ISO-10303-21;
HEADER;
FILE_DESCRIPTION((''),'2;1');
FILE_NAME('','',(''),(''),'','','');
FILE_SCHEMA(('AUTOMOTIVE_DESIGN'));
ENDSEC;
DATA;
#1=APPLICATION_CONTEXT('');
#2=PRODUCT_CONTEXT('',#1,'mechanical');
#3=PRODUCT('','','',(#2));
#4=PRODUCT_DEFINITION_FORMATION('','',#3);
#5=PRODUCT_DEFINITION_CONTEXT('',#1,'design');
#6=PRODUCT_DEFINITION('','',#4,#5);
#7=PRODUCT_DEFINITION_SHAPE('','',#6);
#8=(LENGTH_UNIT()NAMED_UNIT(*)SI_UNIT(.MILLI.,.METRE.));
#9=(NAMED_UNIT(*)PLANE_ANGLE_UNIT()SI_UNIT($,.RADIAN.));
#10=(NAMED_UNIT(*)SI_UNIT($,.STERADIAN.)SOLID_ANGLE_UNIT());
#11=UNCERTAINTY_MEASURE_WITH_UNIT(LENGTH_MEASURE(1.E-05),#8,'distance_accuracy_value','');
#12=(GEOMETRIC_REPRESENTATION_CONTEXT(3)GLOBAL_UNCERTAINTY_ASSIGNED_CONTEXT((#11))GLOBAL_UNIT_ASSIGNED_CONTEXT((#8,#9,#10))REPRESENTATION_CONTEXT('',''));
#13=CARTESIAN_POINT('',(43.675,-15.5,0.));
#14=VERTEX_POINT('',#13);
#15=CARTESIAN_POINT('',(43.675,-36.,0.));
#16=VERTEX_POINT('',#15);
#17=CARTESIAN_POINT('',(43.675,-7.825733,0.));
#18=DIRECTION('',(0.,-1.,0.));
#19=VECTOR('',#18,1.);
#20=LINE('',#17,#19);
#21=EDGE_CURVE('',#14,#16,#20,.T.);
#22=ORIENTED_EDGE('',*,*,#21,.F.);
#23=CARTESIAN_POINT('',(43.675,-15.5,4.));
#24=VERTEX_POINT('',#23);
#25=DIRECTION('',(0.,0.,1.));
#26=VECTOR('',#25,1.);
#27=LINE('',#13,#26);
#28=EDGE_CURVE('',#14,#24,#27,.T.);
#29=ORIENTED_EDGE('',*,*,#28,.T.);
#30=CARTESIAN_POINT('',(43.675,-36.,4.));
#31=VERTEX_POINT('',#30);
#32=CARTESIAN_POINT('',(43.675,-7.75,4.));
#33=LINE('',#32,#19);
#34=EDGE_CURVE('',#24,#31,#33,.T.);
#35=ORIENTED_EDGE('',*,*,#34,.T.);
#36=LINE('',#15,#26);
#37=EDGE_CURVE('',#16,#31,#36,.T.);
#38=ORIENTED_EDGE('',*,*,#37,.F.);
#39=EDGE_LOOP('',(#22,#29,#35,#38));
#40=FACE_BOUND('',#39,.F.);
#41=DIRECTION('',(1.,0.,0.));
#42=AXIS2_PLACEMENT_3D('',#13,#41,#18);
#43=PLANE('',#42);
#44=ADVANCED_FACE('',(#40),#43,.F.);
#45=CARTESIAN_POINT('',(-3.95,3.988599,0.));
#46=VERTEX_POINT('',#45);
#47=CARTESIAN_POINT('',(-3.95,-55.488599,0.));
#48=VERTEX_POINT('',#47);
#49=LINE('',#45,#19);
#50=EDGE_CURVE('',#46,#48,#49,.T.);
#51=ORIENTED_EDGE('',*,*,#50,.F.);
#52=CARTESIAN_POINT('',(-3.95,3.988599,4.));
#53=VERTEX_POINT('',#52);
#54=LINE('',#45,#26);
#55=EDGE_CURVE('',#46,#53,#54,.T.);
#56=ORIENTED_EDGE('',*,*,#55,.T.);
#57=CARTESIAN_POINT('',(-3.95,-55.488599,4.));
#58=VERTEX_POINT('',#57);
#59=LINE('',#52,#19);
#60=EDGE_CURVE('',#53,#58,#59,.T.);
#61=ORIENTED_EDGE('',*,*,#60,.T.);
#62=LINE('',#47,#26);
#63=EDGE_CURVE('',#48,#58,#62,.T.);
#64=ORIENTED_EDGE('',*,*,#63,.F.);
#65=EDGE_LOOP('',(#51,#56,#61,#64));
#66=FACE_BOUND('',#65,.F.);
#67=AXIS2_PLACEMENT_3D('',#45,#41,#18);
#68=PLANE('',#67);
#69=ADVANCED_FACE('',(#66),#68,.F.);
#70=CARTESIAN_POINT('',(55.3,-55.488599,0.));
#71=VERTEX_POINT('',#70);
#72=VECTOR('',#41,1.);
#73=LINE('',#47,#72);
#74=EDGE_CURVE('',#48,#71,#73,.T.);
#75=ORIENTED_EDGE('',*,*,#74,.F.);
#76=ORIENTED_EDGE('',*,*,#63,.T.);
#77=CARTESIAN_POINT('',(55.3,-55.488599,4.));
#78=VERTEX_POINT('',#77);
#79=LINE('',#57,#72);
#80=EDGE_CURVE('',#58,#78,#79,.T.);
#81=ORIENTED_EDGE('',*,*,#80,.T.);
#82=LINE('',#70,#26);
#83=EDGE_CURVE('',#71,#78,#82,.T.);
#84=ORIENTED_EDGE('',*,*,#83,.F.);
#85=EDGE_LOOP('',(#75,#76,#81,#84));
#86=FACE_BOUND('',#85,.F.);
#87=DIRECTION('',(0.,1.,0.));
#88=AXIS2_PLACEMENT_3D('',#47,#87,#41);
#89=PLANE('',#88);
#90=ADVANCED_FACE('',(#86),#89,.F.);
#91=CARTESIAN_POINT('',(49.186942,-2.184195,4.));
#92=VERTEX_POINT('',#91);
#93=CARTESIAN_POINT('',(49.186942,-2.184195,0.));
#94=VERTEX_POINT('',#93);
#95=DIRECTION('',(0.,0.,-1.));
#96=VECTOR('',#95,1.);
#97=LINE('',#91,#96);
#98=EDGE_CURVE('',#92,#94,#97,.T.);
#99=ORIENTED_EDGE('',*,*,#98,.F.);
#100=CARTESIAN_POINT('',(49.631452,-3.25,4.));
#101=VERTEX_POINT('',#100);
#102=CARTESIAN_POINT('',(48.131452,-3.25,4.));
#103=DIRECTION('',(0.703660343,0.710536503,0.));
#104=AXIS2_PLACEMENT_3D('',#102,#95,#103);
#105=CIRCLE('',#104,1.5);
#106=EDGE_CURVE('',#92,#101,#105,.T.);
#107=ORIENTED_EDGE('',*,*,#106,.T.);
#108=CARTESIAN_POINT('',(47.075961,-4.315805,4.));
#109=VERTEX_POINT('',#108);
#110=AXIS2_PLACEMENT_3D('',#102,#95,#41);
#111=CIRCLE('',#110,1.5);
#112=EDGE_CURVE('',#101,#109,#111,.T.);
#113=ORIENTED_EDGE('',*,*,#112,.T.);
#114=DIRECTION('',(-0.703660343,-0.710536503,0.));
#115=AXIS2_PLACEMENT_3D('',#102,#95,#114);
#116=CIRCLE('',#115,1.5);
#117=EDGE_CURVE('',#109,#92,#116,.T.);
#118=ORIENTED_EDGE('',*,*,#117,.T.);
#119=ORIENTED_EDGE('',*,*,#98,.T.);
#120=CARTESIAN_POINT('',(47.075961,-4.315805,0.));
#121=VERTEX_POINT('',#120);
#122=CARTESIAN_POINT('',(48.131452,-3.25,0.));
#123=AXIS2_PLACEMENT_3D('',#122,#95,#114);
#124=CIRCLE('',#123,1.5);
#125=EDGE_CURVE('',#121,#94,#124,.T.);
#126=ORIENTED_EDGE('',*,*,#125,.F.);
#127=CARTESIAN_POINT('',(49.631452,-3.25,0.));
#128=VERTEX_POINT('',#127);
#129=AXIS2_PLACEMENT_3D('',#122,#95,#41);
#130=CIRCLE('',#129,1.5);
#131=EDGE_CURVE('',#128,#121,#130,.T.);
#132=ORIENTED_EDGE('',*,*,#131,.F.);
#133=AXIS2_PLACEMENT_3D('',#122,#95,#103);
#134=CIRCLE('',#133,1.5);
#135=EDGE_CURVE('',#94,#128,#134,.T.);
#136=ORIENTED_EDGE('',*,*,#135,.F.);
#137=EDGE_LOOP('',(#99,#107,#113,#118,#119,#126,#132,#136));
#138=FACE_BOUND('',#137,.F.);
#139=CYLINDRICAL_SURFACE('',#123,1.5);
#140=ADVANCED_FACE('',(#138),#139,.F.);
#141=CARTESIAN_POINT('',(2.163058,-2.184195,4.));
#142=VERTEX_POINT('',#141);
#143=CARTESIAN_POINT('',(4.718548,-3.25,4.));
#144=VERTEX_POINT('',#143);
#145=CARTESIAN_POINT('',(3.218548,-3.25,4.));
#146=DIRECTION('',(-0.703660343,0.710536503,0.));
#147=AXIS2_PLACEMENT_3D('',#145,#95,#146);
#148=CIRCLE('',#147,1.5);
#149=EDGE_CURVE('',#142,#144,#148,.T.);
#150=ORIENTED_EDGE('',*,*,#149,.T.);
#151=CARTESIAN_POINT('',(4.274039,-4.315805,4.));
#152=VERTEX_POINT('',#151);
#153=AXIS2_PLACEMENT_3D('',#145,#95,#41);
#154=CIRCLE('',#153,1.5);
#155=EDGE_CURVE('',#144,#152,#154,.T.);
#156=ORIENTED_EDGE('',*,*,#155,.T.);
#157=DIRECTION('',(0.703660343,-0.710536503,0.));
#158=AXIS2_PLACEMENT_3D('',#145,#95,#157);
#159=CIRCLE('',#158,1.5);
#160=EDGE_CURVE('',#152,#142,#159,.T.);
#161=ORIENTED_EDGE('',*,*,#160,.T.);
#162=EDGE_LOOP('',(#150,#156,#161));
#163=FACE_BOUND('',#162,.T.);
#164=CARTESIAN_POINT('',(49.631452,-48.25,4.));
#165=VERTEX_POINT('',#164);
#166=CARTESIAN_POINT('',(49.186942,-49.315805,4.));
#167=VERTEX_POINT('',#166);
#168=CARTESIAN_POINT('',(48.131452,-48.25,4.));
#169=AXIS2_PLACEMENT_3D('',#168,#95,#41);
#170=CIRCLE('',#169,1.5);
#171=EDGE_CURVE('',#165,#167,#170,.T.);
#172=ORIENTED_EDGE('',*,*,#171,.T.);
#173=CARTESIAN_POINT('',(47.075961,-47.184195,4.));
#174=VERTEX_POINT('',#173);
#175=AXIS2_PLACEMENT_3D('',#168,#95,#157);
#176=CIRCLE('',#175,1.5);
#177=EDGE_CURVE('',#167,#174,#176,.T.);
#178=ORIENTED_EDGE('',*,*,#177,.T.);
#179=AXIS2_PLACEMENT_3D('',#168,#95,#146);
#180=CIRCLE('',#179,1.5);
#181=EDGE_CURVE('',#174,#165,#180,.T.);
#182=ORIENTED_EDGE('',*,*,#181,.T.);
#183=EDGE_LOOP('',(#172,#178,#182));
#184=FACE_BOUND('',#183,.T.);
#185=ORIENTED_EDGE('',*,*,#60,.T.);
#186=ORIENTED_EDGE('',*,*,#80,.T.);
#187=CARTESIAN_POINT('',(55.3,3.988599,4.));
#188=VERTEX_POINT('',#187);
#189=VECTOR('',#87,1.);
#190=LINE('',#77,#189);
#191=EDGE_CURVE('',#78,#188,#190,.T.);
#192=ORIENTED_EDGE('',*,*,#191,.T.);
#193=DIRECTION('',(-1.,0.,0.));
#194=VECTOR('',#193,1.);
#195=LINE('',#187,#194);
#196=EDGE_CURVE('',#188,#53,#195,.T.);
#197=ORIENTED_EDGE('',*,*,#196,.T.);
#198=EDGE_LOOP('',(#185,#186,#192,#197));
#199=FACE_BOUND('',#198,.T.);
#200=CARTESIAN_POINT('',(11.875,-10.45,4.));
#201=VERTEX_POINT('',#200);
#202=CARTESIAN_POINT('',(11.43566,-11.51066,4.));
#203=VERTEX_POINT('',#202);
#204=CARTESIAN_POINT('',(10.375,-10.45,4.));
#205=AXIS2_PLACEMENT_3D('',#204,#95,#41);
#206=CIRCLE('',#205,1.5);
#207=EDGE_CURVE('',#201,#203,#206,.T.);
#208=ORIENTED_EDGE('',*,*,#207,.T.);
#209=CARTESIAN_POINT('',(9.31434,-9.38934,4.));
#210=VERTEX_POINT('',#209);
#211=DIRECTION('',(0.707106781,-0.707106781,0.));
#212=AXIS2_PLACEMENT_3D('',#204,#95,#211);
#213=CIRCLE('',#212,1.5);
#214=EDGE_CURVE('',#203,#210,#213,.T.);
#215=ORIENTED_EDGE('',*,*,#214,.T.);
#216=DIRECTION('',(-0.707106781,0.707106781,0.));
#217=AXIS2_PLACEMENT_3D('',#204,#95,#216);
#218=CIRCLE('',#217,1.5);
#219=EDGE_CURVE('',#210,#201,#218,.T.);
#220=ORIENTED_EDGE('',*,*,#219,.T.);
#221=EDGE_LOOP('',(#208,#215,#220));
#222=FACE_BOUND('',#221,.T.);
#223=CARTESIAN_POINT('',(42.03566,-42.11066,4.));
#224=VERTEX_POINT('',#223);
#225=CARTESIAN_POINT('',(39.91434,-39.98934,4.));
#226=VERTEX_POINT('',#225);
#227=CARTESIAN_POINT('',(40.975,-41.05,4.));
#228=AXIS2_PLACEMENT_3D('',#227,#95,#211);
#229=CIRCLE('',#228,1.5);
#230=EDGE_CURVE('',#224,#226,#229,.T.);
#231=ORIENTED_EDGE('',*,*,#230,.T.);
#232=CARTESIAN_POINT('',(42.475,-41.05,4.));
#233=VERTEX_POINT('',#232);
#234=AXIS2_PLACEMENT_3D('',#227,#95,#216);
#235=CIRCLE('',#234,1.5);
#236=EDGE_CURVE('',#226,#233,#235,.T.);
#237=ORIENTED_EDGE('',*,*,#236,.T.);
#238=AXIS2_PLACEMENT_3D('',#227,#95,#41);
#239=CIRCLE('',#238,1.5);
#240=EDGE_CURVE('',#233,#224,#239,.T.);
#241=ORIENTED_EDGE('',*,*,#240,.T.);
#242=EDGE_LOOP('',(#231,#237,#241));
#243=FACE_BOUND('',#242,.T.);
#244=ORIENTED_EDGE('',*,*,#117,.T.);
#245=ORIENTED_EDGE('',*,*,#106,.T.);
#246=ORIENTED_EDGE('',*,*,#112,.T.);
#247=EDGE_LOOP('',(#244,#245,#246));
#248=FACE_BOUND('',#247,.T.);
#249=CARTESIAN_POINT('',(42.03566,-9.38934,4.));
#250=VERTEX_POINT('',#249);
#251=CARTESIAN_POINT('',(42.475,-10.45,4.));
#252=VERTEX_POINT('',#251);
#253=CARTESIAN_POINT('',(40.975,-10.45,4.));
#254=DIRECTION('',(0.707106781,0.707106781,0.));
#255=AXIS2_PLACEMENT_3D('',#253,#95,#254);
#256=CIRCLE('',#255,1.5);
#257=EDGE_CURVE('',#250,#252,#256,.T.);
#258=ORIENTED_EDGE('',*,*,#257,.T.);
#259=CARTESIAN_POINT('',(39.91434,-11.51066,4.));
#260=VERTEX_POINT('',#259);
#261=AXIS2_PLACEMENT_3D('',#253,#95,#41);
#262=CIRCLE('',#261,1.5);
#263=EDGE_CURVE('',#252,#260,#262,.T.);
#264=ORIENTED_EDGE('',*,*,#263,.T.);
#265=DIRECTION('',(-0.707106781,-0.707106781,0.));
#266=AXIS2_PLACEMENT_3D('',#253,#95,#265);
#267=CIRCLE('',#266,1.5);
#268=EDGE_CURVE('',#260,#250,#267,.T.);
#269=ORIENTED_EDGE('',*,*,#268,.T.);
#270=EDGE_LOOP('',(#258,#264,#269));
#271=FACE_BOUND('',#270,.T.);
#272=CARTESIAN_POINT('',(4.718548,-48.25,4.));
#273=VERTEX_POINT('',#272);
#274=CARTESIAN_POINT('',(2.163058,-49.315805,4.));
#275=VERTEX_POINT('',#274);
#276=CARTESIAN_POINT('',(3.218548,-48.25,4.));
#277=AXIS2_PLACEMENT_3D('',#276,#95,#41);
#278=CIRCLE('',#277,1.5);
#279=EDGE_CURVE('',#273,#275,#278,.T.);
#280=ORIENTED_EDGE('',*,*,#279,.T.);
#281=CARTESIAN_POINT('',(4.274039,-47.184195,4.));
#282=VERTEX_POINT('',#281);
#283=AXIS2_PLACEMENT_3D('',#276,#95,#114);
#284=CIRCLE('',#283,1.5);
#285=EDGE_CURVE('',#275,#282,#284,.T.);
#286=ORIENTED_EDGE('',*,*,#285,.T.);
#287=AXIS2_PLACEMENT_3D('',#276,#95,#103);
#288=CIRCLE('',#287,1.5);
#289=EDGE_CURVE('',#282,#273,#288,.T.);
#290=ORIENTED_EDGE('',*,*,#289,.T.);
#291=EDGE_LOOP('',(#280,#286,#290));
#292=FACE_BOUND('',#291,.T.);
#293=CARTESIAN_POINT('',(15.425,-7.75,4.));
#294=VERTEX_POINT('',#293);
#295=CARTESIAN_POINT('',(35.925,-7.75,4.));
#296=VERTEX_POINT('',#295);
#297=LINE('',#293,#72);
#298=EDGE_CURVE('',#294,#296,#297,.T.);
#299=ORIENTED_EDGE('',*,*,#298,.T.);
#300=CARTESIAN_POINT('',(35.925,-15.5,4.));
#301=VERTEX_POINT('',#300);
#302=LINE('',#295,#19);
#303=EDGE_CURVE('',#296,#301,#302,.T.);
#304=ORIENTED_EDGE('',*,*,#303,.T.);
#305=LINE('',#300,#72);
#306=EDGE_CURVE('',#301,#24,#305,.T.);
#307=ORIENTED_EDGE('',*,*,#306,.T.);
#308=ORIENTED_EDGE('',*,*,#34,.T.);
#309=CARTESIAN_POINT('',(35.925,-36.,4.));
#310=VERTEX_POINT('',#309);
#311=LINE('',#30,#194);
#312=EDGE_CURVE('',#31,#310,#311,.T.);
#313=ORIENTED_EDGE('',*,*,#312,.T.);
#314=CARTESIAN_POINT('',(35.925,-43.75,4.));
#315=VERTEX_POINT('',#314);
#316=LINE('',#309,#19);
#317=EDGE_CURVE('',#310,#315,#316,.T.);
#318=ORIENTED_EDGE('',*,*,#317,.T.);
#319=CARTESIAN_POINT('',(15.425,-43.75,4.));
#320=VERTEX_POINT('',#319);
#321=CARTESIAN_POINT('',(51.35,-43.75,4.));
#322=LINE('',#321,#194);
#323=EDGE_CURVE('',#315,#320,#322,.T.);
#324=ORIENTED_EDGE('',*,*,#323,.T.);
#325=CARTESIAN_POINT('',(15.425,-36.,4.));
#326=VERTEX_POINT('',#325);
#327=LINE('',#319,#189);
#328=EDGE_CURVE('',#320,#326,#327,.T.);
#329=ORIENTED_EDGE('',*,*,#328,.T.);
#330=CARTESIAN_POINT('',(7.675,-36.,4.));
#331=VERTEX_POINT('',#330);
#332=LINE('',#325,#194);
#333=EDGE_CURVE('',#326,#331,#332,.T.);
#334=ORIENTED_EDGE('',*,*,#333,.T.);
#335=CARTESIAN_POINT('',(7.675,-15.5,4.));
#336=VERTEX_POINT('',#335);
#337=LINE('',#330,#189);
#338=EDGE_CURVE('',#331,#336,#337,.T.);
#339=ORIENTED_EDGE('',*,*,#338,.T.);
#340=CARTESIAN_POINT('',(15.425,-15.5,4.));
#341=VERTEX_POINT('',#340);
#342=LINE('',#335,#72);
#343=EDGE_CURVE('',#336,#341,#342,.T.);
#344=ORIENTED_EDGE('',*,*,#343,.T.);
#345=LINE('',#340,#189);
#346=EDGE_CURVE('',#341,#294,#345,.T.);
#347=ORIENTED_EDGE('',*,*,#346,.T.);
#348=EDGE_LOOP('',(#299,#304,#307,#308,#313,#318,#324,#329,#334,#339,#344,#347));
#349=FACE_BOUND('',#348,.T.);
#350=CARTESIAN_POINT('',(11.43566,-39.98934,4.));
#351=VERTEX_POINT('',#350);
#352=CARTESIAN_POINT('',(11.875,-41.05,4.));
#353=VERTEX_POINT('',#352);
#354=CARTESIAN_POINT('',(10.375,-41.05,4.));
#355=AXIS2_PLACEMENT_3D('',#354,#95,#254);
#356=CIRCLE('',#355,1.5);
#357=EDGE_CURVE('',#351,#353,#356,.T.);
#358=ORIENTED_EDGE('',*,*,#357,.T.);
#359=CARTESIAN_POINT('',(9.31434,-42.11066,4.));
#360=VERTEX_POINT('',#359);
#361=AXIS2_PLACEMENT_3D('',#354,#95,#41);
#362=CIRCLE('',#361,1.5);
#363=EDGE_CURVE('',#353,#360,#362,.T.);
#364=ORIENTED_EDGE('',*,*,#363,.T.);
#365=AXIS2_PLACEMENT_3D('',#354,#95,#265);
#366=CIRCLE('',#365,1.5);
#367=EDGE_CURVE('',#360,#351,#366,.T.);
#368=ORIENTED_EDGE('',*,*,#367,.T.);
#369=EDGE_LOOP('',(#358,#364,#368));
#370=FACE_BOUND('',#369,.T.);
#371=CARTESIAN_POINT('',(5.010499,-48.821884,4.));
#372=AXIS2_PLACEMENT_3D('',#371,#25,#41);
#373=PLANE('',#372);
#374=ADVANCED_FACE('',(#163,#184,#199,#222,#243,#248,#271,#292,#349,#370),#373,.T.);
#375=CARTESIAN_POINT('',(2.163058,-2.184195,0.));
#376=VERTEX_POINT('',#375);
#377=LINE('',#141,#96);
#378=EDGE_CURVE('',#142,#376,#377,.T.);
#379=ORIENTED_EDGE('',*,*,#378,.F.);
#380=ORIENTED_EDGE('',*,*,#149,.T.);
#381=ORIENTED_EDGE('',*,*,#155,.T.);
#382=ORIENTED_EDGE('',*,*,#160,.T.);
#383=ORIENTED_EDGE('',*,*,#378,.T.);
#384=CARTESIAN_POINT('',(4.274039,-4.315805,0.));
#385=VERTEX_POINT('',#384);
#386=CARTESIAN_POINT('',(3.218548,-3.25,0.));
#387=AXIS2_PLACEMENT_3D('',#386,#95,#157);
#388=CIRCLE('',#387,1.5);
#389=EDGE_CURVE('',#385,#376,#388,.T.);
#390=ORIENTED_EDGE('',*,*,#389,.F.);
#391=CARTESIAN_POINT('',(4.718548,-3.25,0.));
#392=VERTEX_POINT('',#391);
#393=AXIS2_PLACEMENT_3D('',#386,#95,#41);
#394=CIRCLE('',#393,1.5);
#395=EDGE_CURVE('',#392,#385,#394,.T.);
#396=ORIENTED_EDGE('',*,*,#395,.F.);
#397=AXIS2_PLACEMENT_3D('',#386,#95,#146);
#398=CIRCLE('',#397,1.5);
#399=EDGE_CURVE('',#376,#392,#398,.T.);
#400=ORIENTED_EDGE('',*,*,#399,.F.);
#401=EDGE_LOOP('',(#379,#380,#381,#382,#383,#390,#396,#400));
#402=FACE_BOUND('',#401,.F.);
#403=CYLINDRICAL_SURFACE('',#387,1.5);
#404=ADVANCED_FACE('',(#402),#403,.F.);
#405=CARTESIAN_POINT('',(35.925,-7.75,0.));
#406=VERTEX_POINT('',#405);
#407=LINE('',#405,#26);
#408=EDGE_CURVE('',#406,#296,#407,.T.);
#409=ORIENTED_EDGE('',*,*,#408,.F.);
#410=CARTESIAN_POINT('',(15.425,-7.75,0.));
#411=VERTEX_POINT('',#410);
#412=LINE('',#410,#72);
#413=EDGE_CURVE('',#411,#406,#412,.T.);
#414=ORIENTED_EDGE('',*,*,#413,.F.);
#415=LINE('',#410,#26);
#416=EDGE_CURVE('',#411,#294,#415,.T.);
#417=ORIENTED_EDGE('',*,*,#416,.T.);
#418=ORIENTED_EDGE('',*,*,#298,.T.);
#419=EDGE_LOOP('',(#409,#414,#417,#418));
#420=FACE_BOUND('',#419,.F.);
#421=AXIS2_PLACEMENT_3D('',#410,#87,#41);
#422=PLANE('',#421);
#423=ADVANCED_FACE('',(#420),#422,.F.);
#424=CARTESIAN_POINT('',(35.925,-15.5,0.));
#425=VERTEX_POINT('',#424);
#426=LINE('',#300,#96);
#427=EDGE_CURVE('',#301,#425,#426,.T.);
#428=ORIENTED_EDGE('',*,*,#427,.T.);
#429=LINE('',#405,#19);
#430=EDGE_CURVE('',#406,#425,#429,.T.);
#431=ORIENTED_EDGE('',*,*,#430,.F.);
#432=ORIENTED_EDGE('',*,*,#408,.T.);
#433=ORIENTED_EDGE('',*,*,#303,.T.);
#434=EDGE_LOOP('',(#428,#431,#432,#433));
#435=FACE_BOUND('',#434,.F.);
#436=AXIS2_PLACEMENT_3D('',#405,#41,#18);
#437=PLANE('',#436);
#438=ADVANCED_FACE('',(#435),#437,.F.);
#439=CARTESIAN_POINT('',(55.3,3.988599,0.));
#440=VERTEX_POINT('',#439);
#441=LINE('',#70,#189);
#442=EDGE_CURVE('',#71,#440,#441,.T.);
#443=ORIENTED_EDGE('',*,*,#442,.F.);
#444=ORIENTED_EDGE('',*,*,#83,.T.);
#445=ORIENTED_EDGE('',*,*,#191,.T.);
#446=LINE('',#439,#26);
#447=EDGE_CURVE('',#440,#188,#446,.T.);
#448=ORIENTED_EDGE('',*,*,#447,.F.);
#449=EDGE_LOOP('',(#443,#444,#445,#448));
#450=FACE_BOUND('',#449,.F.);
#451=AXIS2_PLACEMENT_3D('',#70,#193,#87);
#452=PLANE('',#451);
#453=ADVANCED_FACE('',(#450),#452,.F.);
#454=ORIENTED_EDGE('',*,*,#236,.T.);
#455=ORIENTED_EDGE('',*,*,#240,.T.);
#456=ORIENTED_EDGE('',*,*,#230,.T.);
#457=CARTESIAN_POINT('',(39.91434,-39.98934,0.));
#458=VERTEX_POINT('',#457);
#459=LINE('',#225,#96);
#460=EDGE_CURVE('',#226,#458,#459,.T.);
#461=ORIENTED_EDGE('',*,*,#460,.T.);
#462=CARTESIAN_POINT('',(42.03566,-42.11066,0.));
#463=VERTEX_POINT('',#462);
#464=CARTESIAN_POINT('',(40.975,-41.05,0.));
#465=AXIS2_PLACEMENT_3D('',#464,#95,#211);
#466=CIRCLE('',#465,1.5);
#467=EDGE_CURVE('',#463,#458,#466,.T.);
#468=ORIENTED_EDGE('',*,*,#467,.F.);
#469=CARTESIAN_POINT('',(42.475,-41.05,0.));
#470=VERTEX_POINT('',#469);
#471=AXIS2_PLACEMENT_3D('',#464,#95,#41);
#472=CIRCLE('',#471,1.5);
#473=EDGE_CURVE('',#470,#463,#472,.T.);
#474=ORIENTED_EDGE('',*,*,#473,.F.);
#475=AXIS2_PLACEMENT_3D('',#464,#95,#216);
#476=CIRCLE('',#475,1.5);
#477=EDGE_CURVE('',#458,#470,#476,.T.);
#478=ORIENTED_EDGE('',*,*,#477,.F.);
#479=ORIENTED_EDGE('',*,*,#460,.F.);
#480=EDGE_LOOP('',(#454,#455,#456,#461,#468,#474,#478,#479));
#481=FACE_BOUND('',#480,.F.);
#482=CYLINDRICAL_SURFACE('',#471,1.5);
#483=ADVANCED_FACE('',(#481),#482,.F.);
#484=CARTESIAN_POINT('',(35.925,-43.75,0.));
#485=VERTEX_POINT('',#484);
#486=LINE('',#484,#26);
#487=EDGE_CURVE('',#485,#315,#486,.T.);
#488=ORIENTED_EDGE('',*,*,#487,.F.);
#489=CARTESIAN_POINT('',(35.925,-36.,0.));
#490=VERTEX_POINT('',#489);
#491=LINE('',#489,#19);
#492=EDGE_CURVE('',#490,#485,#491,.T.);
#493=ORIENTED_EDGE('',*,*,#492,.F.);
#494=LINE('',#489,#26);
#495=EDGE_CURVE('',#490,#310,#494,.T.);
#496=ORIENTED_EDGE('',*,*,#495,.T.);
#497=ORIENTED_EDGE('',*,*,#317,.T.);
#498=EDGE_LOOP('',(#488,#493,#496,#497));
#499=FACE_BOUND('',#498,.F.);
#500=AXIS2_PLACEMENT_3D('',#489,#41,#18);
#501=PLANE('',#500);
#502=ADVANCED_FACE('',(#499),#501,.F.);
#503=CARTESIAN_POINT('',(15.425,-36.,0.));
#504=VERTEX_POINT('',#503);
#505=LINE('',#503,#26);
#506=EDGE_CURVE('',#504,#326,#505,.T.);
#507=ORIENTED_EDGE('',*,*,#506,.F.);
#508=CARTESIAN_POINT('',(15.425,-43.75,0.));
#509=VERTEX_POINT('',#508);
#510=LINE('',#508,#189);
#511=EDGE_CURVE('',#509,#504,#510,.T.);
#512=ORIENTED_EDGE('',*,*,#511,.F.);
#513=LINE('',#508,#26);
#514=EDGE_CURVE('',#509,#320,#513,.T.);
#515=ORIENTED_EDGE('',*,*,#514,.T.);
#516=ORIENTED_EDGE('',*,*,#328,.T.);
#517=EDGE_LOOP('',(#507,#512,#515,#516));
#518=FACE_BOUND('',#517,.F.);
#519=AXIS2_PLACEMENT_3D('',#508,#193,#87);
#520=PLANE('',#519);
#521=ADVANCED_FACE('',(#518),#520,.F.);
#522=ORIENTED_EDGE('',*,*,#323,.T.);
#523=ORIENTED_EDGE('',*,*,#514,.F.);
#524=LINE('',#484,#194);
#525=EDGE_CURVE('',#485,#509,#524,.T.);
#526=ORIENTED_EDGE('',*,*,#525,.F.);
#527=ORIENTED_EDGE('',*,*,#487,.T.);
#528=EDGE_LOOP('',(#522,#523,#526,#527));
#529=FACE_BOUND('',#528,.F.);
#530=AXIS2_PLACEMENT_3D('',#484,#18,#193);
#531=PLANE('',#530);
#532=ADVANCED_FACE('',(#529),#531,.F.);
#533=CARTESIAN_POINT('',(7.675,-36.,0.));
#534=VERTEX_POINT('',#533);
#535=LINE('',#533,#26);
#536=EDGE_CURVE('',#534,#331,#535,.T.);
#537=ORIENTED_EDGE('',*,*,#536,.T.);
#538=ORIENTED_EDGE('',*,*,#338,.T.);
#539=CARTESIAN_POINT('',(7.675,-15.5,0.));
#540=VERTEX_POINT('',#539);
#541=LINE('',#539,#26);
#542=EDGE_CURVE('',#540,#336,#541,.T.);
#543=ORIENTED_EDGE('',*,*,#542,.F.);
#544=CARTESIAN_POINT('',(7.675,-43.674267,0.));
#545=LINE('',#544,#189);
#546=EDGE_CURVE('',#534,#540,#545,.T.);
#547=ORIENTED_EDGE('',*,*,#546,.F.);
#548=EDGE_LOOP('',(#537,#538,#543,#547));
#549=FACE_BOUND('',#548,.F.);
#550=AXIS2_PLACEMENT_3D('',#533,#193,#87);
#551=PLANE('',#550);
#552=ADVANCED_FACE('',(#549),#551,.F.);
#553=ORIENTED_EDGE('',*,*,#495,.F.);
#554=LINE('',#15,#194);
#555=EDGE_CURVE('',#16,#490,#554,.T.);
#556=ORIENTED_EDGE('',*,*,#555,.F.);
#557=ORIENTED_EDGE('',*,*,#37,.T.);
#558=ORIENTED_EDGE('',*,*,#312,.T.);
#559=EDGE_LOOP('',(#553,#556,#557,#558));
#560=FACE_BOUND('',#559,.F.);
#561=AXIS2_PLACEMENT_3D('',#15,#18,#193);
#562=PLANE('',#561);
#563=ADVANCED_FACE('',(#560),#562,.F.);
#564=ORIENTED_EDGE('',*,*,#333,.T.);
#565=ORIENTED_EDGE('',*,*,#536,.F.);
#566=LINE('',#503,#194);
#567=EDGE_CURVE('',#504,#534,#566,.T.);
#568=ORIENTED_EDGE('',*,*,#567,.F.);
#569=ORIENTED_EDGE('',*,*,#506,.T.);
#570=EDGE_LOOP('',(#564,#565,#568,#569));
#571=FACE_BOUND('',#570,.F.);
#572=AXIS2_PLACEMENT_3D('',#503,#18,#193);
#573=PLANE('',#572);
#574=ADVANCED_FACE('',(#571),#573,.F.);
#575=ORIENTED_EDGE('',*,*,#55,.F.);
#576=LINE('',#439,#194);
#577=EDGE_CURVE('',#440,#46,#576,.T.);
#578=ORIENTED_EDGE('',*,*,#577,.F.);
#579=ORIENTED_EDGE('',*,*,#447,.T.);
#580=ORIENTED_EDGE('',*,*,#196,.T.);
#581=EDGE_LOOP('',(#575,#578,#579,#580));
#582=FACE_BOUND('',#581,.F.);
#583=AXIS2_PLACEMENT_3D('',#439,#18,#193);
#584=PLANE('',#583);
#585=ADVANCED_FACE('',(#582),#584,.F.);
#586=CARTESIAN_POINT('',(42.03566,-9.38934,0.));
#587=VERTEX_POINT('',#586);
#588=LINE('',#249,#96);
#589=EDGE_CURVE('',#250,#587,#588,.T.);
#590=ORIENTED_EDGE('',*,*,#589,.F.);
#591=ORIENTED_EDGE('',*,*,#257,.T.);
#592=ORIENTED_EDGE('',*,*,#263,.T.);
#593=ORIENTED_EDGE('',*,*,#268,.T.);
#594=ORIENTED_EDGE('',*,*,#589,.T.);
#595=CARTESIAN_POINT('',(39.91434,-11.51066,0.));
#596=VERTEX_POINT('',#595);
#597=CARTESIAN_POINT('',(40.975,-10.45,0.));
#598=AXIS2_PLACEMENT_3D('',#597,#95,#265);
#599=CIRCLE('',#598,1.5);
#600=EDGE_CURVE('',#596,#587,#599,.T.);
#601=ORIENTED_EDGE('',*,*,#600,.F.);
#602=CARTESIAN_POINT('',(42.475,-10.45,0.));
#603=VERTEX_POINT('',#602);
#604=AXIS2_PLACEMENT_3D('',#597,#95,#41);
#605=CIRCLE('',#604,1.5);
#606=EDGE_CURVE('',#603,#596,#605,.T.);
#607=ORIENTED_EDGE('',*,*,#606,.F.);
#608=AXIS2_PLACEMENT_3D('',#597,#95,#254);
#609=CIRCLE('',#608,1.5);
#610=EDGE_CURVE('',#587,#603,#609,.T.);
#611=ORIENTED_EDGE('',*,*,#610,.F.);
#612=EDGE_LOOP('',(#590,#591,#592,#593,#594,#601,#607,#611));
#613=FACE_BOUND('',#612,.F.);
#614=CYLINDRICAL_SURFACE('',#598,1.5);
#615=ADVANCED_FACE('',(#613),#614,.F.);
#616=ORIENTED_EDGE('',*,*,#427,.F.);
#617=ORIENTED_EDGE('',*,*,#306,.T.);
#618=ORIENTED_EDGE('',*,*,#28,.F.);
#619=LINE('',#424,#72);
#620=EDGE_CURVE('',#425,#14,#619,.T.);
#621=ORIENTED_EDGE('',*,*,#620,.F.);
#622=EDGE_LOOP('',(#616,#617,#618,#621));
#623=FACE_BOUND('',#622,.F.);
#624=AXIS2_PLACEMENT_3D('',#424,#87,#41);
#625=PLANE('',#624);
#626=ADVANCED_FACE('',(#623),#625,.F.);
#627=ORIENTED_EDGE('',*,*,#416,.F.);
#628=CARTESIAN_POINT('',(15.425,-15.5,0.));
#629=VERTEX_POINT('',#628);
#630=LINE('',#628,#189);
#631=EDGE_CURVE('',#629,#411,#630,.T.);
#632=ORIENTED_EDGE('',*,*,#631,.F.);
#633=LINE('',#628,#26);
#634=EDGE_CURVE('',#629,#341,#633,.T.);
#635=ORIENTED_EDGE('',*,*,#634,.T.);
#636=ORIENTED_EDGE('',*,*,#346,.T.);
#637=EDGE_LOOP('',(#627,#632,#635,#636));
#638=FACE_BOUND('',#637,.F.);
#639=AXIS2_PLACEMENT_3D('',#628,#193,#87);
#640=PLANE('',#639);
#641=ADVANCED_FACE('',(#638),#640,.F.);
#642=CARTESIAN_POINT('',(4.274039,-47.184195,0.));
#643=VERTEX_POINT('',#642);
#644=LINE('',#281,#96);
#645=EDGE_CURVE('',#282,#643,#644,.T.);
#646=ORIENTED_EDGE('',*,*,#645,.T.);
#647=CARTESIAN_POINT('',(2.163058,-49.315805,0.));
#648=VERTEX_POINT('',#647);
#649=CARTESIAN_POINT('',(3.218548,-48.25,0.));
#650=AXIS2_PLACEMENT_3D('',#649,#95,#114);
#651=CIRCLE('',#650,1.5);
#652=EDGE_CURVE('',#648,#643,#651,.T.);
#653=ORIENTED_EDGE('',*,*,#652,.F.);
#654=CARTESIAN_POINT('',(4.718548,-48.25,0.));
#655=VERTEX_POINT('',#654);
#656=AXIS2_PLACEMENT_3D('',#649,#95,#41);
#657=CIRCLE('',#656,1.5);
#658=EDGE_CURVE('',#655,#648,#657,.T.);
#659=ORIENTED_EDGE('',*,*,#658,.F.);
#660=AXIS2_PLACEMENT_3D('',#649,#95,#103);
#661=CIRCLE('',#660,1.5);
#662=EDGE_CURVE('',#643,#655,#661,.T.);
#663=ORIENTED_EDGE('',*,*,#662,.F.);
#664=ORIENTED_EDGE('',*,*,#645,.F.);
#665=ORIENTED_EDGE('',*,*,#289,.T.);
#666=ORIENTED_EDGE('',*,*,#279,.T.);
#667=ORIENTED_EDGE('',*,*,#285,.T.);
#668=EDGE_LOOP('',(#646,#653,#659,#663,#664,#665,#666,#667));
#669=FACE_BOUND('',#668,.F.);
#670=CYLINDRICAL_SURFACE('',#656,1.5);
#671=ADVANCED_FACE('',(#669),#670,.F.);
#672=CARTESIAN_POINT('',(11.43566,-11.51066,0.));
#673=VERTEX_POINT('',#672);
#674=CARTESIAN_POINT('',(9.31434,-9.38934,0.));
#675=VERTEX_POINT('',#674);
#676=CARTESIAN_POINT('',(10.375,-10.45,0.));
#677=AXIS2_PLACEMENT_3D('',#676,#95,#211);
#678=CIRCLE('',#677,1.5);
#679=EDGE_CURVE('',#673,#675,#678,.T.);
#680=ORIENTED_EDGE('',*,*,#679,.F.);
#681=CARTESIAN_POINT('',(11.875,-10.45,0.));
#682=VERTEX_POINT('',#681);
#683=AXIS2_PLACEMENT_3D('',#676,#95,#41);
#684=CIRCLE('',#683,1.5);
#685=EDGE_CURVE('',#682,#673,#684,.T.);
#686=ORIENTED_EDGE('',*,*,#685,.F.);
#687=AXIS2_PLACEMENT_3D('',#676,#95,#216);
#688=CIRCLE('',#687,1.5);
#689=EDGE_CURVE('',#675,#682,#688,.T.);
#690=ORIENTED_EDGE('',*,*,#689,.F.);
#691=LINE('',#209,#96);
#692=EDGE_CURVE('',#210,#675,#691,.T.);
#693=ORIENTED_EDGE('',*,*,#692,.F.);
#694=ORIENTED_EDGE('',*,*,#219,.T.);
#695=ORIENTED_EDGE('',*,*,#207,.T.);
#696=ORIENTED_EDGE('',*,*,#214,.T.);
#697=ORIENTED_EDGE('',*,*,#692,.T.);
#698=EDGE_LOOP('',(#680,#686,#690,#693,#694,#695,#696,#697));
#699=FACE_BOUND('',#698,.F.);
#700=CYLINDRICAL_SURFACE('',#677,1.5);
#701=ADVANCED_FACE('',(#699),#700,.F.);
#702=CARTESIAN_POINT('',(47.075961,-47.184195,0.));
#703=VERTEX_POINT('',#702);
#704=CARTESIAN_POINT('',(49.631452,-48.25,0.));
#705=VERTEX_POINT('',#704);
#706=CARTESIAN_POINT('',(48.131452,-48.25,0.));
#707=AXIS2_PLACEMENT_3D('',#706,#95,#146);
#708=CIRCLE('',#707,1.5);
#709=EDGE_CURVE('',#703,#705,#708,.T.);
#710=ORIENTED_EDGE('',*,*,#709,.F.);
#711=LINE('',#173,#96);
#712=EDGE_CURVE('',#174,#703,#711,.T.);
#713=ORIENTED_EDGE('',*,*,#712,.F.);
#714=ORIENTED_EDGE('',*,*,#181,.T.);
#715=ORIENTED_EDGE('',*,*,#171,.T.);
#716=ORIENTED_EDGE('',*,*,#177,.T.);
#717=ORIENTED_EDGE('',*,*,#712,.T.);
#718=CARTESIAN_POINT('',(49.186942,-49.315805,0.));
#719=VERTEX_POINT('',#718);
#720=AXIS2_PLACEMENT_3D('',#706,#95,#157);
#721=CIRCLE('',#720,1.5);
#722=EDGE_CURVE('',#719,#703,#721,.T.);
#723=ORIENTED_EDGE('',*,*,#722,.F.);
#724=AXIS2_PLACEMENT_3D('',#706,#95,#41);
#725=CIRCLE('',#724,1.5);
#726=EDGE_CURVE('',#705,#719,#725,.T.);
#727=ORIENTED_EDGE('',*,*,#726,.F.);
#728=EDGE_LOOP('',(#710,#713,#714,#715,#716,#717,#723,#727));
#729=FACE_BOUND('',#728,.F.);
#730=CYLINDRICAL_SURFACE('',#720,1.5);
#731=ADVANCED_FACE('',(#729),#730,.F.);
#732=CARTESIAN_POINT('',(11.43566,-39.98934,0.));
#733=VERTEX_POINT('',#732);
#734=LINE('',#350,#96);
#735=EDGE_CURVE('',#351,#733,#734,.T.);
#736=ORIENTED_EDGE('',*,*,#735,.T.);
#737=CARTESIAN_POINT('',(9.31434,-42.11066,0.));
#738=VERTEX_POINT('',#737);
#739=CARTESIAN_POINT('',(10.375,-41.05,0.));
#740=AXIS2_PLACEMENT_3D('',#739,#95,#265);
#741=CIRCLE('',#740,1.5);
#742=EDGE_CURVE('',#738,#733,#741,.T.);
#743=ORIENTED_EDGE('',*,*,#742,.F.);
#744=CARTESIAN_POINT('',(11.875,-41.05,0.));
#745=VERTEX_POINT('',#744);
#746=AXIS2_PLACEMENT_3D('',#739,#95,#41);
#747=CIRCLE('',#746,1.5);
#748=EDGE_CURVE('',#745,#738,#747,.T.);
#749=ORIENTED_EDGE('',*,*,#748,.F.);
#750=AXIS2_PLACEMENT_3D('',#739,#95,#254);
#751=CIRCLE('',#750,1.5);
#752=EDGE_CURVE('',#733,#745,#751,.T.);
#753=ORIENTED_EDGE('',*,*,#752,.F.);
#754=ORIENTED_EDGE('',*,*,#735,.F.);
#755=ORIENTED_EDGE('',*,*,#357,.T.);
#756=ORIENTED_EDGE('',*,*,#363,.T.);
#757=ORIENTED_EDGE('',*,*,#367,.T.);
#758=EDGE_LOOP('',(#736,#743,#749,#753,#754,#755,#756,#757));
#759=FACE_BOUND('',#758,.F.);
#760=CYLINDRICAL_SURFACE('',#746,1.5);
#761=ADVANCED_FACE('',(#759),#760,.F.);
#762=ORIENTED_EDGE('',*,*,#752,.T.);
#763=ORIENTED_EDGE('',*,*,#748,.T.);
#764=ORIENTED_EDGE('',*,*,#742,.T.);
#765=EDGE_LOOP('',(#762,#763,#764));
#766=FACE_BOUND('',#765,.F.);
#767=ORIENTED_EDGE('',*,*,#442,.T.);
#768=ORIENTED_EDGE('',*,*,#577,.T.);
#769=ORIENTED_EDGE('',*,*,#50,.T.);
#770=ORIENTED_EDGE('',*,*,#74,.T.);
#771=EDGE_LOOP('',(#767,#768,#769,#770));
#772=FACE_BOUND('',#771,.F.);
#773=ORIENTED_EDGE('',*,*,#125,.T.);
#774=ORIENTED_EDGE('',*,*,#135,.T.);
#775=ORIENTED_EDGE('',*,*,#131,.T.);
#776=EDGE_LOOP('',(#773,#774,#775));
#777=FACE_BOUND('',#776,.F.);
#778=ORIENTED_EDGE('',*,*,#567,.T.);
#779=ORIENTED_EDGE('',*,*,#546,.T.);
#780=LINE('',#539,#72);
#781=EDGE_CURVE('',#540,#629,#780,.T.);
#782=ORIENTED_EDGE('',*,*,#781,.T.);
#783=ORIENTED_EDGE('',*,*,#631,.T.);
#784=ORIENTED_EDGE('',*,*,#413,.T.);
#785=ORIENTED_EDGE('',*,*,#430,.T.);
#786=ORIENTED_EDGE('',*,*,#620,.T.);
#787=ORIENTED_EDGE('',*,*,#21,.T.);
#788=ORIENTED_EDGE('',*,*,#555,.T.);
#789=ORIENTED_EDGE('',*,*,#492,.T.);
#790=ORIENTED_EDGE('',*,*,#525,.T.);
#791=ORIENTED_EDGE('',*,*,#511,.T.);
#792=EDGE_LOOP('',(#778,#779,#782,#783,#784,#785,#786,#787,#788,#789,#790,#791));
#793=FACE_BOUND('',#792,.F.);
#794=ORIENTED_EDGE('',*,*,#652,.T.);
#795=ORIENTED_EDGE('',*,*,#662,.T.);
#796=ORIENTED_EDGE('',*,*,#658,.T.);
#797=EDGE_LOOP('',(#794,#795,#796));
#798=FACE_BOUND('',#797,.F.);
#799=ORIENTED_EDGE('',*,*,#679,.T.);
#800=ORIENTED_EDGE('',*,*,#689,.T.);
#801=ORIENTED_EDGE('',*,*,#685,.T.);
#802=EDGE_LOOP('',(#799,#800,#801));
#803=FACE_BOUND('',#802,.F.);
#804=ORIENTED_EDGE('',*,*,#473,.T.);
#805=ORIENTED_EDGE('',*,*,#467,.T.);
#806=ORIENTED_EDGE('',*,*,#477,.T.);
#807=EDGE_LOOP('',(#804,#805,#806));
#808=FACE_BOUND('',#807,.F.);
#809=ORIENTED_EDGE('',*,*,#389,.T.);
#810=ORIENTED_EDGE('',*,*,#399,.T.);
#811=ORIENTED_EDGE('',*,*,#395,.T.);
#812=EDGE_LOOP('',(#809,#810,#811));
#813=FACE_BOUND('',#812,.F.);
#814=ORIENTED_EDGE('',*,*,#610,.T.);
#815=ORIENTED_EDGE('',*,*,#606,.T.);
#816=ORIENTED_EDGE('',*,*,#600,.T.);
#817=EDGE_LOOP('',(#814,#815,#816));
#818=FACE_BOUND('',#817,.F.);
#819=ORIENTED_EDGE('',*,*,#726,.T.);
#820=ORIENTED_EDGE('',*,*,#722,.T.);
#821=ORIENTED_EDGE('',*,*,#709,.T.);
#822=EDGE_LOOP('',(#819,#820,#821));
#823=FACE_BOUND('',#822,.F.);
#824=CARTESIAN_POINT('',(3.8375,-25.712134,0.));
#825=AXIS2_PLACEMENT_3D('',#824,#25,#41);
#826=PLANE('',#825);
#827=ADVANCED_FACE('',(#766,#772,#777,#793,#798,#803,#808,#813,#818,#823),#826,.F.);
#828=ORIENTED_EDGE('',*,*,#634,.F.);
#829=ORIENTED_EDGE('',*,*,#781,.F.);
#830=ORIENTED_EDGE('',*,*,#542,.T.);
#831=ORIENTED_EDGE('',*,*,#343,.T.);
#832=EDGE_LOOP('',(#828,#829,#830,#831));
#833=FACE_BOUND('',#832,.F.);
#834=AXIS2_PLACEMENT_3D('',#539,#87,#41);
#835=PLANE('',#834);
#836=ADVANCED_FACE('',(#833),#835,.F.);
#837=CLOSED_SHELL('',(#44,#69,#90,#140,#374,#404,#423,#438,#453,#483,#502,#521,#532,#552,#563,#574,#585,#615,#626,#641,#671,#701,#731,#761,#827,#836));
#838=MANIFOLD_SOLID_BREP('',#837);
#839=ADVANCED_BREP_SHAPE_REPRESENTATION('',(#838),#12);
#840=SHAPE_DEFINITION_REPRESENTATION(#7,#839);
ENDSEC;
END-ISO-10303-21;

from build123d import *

# Parameters (mm, degrees)
F1_DEPTH = 2
F2_DEPTH = 4


with BuildPart() as f1:
    # F0 (on Top) → F1 (new body)
    with BuildSketch(Plane.XY):
        Polygon((0, -7.75), (0, -43.674267101), (7.675, -43.674267101), (7.675, -36), (7.675, -25.75), (7.675, -15.5), (7.675, -7.75), align=None)
        with BuildLine():
            Line((0, 0), (0, -7.75))
            Line((0, -7.75), (7.675, -7.75))
            Line((7.675, -7.75), (4.2740389016, -4.3158047541))
            ThreePointArc((4.2740389016, -4.3158047541), (2.152743633, -4.3054905145), (2.1630578726, -2.1841952459))
            Line((2.1630578726, -2.1841952459), (0, 0))
        make_face()
        with BuildLine():
            Line((7.675, 0), (0, 0))
            Line((0, 0), (2.1630578726, -2.1841952459))
            ThreePointArc((2.1630578726, -2.1841952459), (3.7959409001, -1.8655803072), (4.7185483871, -3.25))
            ThreePointArc((4.7185483871, -3.25), (4.6029680799, -3.827392513), (4.2740389016, -4.3158047541))
            Line((4.2740389016, -4.3158047541), (7.675, -7.75))
            Line((7.675, -7.75), (7.675, 0))
        make_face()
        Polygon((7.675, 0), (7.675, -7.75), (15.425, -7.75), (25.675, -7.75), (35.925, -7.75), (43.6, -7.75), (43.6, 0), align=None)
        Polygon((43.675, -36), (43.675, -43.75), (51.35, -43.75), (51.35, -7.825732899), (43.675, -7.825732899), (43.675, -15.5), (43.675, -25.75), align=None)
        Polygon((43.6, -7.825732899), (43.675, -7.825732899), (43.675, -7.75), (43.6, -7.825), align=None)
        with BuildLine():
            Line((51.35, -7.825732899), (51.35, 0))
            Line((51.35, 0), (49.1869421274, -2.1841952459))
            ThreePointArc((49.1869421274, -2.1841952459), (49.5158713057, -2.672607487), (49.6314516129, -3.25))
            ThreePointArc((49.6314516129, -3.25), (48.7088441259, -4.6344196928), (47.0759610984, -4.3158047541))
            Line((47.0759610984, -4.3158047541), (43.675, -7.75))
            Line((43.675, -7.75), (43.675, -7.825732899))
            Line((43.675, -7.825732899), (51.35, -7.825732899))
        make_face()
        with BuildLine():
            Line((49.1869421274, -2.1841952459), (51.35, 0))
            Line((51.35, 0), (43.6, 0))
            Line((43.6, 0), (43.6, -7.75))
            Line((43.6, -7.75), (43.675, -7.75))
            Line((43.675, -7.75), (47.0759610984, -4.3158047541))
            ThreePointArc((47.0759610984, -4.3158047541), (47.0656468588, -2.1945094855), (49.1869421274, -2.1841952459))
        make_face()
        with BuildLine():
            Line((9.3143398282, -9.3893398282), (7.675, -7.75))
            Line((7.675, -7.75), (7.675, -15.5))
            Line((7.675, -15.5), (11.55, -11.625))
            Line((11.55, -11.625), (11.4356601718, -11.5106601718))
            ThreePointArc((11.4356601718, -11.5106601718), (9.3143398282, -11.5106601718), (9.3143398282, -9.3893398282))
        make_face()
        Polygon((11.55, -11.625), (7.675, -15.5), (15.425, -15.5), align=None)
        Polygon((15.425, -15.5), (15.425, -7.75), (11.55, -11.625), align=None)
        with BuildLine():
            Line((15.425, -7.75), (7.675, -7.75))
            Line((7.675, -7.75), (9.3143398282, -9.3893398282))
            ThreePointArc((9.3143398282, -9.3893398282), (10.9490251485, -9.0641807012), (11.875, -10.45))
            ThreePointArc((11.875, -10.45), (11.7608192988, -11.0240251485), (11.4356601718, -11.5106601718))
            Line((11.4356601718, -11.5106601718), (11.55, -11.625))
            Line((11.55, -11.625), (15.425, -7.75))
        make_face()
        Polygon((39.8, -39.875), (43.675, -36), (35.925, -36), align=None)
        Polygon((35.925, -36), (35.925, -43.75), (39.8, -39.875), align=None)
        with BuildLine():
            Line((35.925, -43.75), (43.675, -43.75))
            Line((43.675, -43.75), (42.0356601718, -42.1106601718))
            ThreePointArc((42.0356601718, -42.1106601718), (39.9143398282, -42.1106601718), (39.9143398282, -39.9893398282))
            Line((39.9143398282, -39.9893398282), (39.8, -39.875))
            Line((39.8, -39.875), (35.925, -43.75))
        make_face()
        Polygon((7.75, -43.75), (7.75, -51.5), (43.675, -51.5), (43.675, -43.75), (35.925, -43.75), (25.675, -43.75), (15.425, -43.75), align=None)
        with BuildLine():
            Line((42.0356601718, -42.1106601718), (43.675, -43.75))
            Line((43.675, -43.75), (43.675, -36))
            Line((43.675, -36), (39.8, -39.875))
            Line((39.8, -39.875), (39.9143398282, -39.9893398282))
            ThreePointArc((39.9143398282, -39.9893398282), (41.5490251485, -39.6641807012), (42.475, -41.05))
            ThreePointArc((42.475, -41.05), (42.3608192988, -41.6240251485), (42.0356601718, -42.1106601718))
        make_face()
        Polygon((7.675, -43.75), (7.75, -43.75), (7.75, -43.675), align=None)
        with BuildLine():
            Line((7.75, -43.675), (7.75, -43.75))
            Line((7.75, -43.75), (15.425, -43.75))
            Line((15.425, -43.75), (11.55, -39.875))
            Line((11.55, -39.875), (11.4356601718, -39.9893398282))
            ThreePointArc((11.4356601718, -39.9893398282), (11.7608192988, -40.4759748515), (11.875, -41.05))
            ThreePointArc((11.875, -41.05), (10.9490251485, -42.4358192988), (9.3143398282, -42.1106601718))
            Line((9.3143398282, -42.1106601718), (7.75, -43.675))
        make_face()
        Polygon((7.75, -43.674267101), (7.675, -43.674267101), (7.675, -43.75), (7.75, -43.675), align=None)
        with BuildLine():
            Line((7.675, -36), (7.675, -43.674267101))
            Line((7.675, -43.674267101), (7.75, -43.674267101))
            Line((7.75, -43.674267101), (7.75, -43.675))
            Line((7.75, -43.675), (9.3143398282, -42.1106601718))
            ThreePointArc((9.3143398282, -42.1106601718), (9.3143398282, -39.9893398282), (11.4356601718, -39.9893398282))
            Line((11.4356601718, -39.9893398282), (11.55, -39.875))
            Line((11.55, -39.875), (7.675, -36))
        make_face()
        with BuildLine():
            Line((0, -43.674267101), (0, -51.5))
            Line((0, -51.5), (2.1630578726, -49.3158047541))
            ThreePointArc((2.1630578726, -49.3158047541), (2.152743633, -47.1945094855), (4.2740389016, -47.1841952459))
            Line((4.2740389016, -47.1841952459), (7.675, -43.75))
            Line((7.675, -43.75), (7.675, -43.674267101))
            Line((7.675, -43.674267101), (0, -43.674267101))
        make_face()
        with BuildLine():
            Line((2.1630578726, -49.3158047541), (0, -51.5))
            Line((0, -51.5), (7.75, -51.5))
            Line((7.75, -51.5), (7.75, -43.75))
            Line((7.75, -43.75), (7.675, -43.75))
            Line((7.675, -43.75), (4.2740389016, -47.1841952459))
            ThreePointArc((4.2740389016, -47.1841952459), (4.6029680799, -47.672607487), (4.7185483871, -48.25))
            ThreePointArc((4.7185483871, -48.25), (3.7959409001, -49.6344196928), (2.1630578726, -49.3158047541))
        make_face()
        with BuildLine():
            Line((43.675, -43.75), (43.675, -51.5))
            Line((43.675, -51.5), (51.35, -51.5))
            Line((51.35, -51.5), (49.1869421274, -49.3158047541))
            ThreePointArc((49.1869421274, -49.3158047541), (47.0656468588, -49.3054905145), (47.0759610984, -47.1841952459))
            Line((47.0759610984, -47.1841952459), (43.675, -43.75))
        make_face()
        with BuildLine():
            Line((49.1869421274, -49.3158047541), (51.35, -51.5))
            Line((51.35, -51.5), (51.35, -43.75))
            Line((51.35, -43.75), (43.675, -43.75))
            Line((43.675, -43.75), (47.0759610984, -47.1841952459))
            ThreePointArc((47.0759610984, -47.1841952459), (48.7088441259, -46.8655803072), (49.6314516129, -48.25))
            ThreePointArc((49.6314516129, -48.25), (49.5158713057, -48.827392513), (49.1869421274, -49.3158047541))
        make_face()
        Polygon((15.425, -36), (7.675, -36), (11.55, -39.875), align=None)
        Polygon((11.55, -39.875), (15.425, -43.75), (15.425, -36), align=None)
        Polygon((39.8, -11.625), (35.925, -7.75), (35.925, -15.5), align=None)
        Polygon((35.925, -15.5), (43.675, -15.5), (39.8, -11.625), align=None)
        with BuildLine():
            Line((43.6, -7.825), (43.6, -7.75))
            Line((43.6, -7.75), (35.925, -7.75))
            Line((35.925, -7.75), (39.8, -11.625))
            Line((39.8, -11.625), (39.9143398282, -11.5106601718))
            ThreePointArc((39.9143398282, -11.5106601718), (39.9143398282, -9.3893398282), (42.0356601718, -9.3893398282))
            Line((42.0356601718, -9.3893398282), (43.6, -7.825))
        make_face()
        with BuildLine():
            Line((43.675, -15.5), (43.675, -7.825732899))
            Line((43.675, -7.825732899), (43.6, -7.825732899))
            Line((43.6, -7.825732899), (43.6, -7.825))
            Line((43.6, -7.825), (42.0356601718, -9.3893398282))
            ThreePointArc((42.0356601718, -9.3893398282), (42.3608192988, -9.8759748515), (42.475, -10.45))
            ThreePointArc((42.475, -10.45), (41.5490251485, -11.8358192988), (39.9143398282, -11.5106601718))
            Line((39.9143398282, -11.5106601718), (39.8, -11.625))
            Line((39.8, -11.625), (43.675, -15.5))
        make_face()
    extrude(amount=F1_DEPTH)

    # F0 (on Top) → F2 (join)
    with BuildSketch(Plane.XY):
        with BuildLine():
            Line((2.1630578726, -49.3158047541), (0, -51.5))
            Line((0, -51.5), (7.75, -51.5))
            Line((7.75, -51.5), (7.75, -43.75))
            Line((7.75, -43.75), (7.675, -43.75))
            Line((7.675, -43.75), (4.2740389016, -47.1841952459))
            ThreePointArc((4.2740389016, -47.1841952459), (4.6029680799, -47.672607487), (4.7185483871, -48.25))
            ThreePointArc((4.7185483871, -48.25), (3.7959409001, -49.6344196928), (2.1630578726, -49.3158047541))
        make_face()
        Polygon((-3.95, -55.4885993485), (0, -51.5), (0, -43.674267101), (0, -7.75), (0, 0), (-3.95, 3.9885993485), align=None)
        with BuildLine():
            Line((0, -43.674267101), (0, -51.5))
            Line((0, -51.5), (2.1630578726, -49.3158047541))
            ThreePointArc((2.1630578726, -49.3158047541), (2.152743633, -47.1945094855), (4.2740389016, -47.1841952459))
            Line((4.2740389016, -47.1841952459), (7.675, -43.75))
            Line((7.675, -43.75), (7.675, -43.674267101))
            Line((7.675, -43.674267101), (0, -43.674267101))
        make_face()
        Polygon((7.75, -51.5), (0, -51.5), (-3.95, -55.4885993485), (55.3, -55.4885993485), (51.35, -51.5), (43.675, -51.5), align=None)
        Polygon((7.75, -43.75), (7.75, -51.5), (43.675, -51.5), (43.675, -43.75), (35.925, -43.75), (25.675, -43.75), (15.425, -43.75), align=None)
        Polygon((0, -7.75), (0, -43.674267101), (7.675, -43.674267101), (7.675, -36), (7.675, -25.75), (7.675, -15.5), (7.675, -7.75), align=None)
        with BuildLine():
            Line((43.675, -43.75), (43.675, -51.5))
            Line((43.675, -51.5), (51.35, -51.5))
            Line((51.35, -51.5), (49.1869421274, -49.3158047541))
            ThreePointArc((49.1869421274, -49.3158047541), (47.0656468588, -49.3054905145), (47.0759610984, -47.1841952459))
            Line((47.0759610984, -47.1841952459), (43.675, -43.75))
        make_face()
        with BuildLine():
            Line((7.75, -43.675), (7.75, -43.75))
            Line((7.75, -43.75), (15.425, -43.75))
            Line((15.425, -43.75), (11.55, -39.875))
            Line((11.55, -39.875), (11.4356601718, -39.9893398282))
            ThreePointArc((11.4356601718, -39.9893398282), (11.7608192988, -40.4759748515), (11.875, -41.05))
            ThreePointArc((11.875, -41.05), (10.9490251485, -42.4358192988), (9.3143398282, -42.1106601718))
            Line((9.3143398282, -42.1106601718), (7.75, -43.675))
        make_face()
        Polygon((7.675, -43.75), (7.75, -43.75), (7.75, -43.675), align=None)
        with BuildLine():
            Line((0, 0), (0, -7.75))
            Line((0, -7.75), (7.675, -7.75))
            Line((7.675, -7.75), (4.2740389016, -4.3158047541))
            ThreePointArc((4.2740389016, -4.3158047541), (2.152743633, -4.3054905145), (2.1630578726, -2.1841952459))
            Line((2.1630578726, -2.1841952459), (0, 0))
        make_face()
        Polygon((7.75, -43.674267101), (7.675, -43.674267101), (7.675, -43.75), (7.75, -43.675), align=None)
        with BuildLine():
            Line((7.675, -36), (7.675, -43.674267101))
            Line((7.675, -43.674267101), (7.75, -43.674267101))
            Line((7.75, -43.674267101), (7.75, -43.675))
            Line((7.75, -43.675), (9.3143398282, -42.1106601718))
            ThreePointArc((9.3143398282, -42.1106601718), (9.3143398282, -39.9893398282), (11.4356601718, -39.9893398282))
            Line((11.4356601718, -39.9893398282), (11.55, -39.875))
            Line((11.55, -39.875), (7.675, -36))
        make_face()
        Polygon((51.35, -51.5), (55.3, -55.4885993485), (55.3, 3.9885993485), (51.35, 0), (51.35, -7.825732899), (51.35, -43.75), align=None)
        Polygon((55.3, 3.9885993485), (-3.95, 3.9885993485), (0, 0), (7.675, 0), (43.6, 0), (51.35, 0), align=None)
        with BuildLine():
            Line((49.1869421274, -49.3158047541), (51.35, -51.5))
            Line((51.35, -51.5), (51.35, -43.75))
            Line((51.35, -43.75), (43.675, -43.75))
            Line((43.675, -43.75), (47.0759610984, -47.1841952459))
            ThreePointArc((47.0759610984, -47.1841952459), (48.7088441259, -46.8655803072), (49.6314516129, -48.25))
            ThreePointArc((49.6314516129, -48.25), (49.5158713057, -48.827392513), (49.1869421274, -49.3158047541))
        make_face()
        with BuildLine():
            Line((42.0356601718, -42.1106601718), (43.675, -43.75))
            Line((43.675, -43.75), (43.675, -36))
            Line((43.675, -36), (39.8, -39.875))
            Line((39.8, -39.875), (39.9143398282, -39.9893398282))
            ThreePointArc((39.9143398282, -39.9893398282), (41.5490251485, -39.6641807012), (42.475, -41.05))
            ThreePointArc((42.475, -41.05), (42.3608192988, -41.6240251485), (42.0356601718, -42.1106601718))
        make_face()
        with BuildLine():
            Line((35.925, -43.75), (43.675, -43.75))
            Line((43.675, -43.75), (42.0356601718, -42.1106601718))
            ThreePointArc((42.0356601718, -42.1106601718), (39.9143398282, -42.1106601718), (39.9143398282, -39.9893398282))
            Line((39.9143398282, -39.9893398282), (39.8, -39.875))
            Line((39.8, -39.875), (35.925, -43.75))
        make_face()
        Polygon((43.675, -36), (43.675, -43.75), (51.35, -43.75), (51.35, -7.825732899), (43.675, -7.825732899), (43.675, -15.5), (43.675, -25.75), align=None)
        Polygon((11.55, -39.875), (15.425, -43.75), (15.425, -36), align=None)
        with BuildLine():
            Line((7.675, 0), (0, 0))
            Line((0, 0), (2.1630578726, -2.1841952459))
            ThreePointArc((2.1630578726, -2.1841952459), (3.7959409001, -1.8655803072), (4.7185483871, -3.25))
            ThreePointArc((4.7185483871, -3.25), (4.6029680799, -3.827392513), (4.2740389016, -4.3158047541))
            Line((4.2740389016, -4.3158047541), (7.675, -7.75))
            Line((7.675, -7.75), (7.675, 0))
        make_face()
        Polygon((7.675, 0), (7.675, -7.75), (15.425, -7.75), (25.675, -7.75), (35.925, -7.75), (43.6, -7.75), (43.6, 0), align=None)
        with BuildLine():
            Line((9.3143398282, -9.3893398282), (7.675, -7.75))
            Line((7.675, -7.75), (7.675, -15.5))
            Line((7.675, -15.5), (11.55, -11.625))
            Line((11.55, -11.625), (11.4356601718, -11.5106601718))
            ThreePointArc((11.4356601718, -11.5106601718), (9.3143398282, -11.5106601718), (9.3143398282, -9.3893398282))
        make_face()
        with BuildLine():
            Line((15.425, -7.75), (7.675, -7.75))
            Line((7.675, -7.75), (9.3143398282, -9.3893398282))
            ThreePointArc((9.3143398282, -9.3893398282), (10.9490251485, -9.0641807012), (11.875, -10.45))
            ThreePointArc((11.875, -10.45), (11.7608192988, -11.0240251485), (11.4356601718, -11.5106601718))
            Line((11.4356601718, -11.5106601718), (11.55, -11.625))
            Line((11.55, -11.625), (15.425, -7.75))
        make_face()
        Polygon((15.425, -36), (7.675, -36), (11.55, -39.875), align=None)
        Polygon((35.925, -36), (35.925, -43.75), (39.8, -39.875), align=None)
        Polygon((39.8, -39.875), (43.675, -36), (35.925, -36), align=None)
        Polygon((15.425, -15.5), (15.425, -7.75), (11.55, -11.625), align=None)
        Polygon((11.55, -11.625), (7.675, -15.5), (15.425, -15.5), align=None)
        with BuildLine():
            Line((49.1869421274, -2.1841952459), (51.35, 0))
            Line((51.35, 0), (43.6, 0))
            Line((43.6, 0), (43.6, -7.75))
            Line((43.6, -7.75), (43.675, -7.75))
            Line((43.675, -7.75), (47.0759610984, -4.3158047541))
            ThreePointArc((47.0759610984, -4.3158047541), (47.0656468588, -2.1945094855), (49.1869421274, -2.1841952459))
        make_face()
        with BuildLine():
            Line((51.35, -7.825732899), (51.35, 0))
            Line((51.35, 0), (49.1869421274, -2.1841952459))
            ThreePointArc((49.1869421274, -2.1841952459), (49.5158713057, -2.672607487), (49.6314516129, -3.25))
            ThreePointArc((49.6314516129, -3.25), (48.7088441259, -4.6344196928), (47.0759610984, -4.3158047541))
            Line((47.0759610984, -4.3158047541), (43.675, -7.75))
            Line((43.675, -7.75), (43.675, -7.825732899))
            Line((43.675, -7.825732899), (51.35, -7.825732899))
        make_face()
        Polygon((43.6, -7.825732899), (43.675, -7.825732899), (43.675, -7.75), (43.6, -7.825), align=None)
        with BuildLine():
            Line((43.675, -15.5), (43.675, -7.825732899))
            Line((43.675, -7.825732899), (43.6, -7.825732899))
            Line((43.6, -7.825732899), (43.6, -7.825))
            Line((43.6, -7.825), (42.0356601718, -9.3893398282))
            ThreePointArc((42.0356601718, -9.3893398282), (42.3608192988, -9.8759748515), (42.475, -10.45))
            ThreePointArc((42.475, -10.45), (41.5490251485, -11.8358192988), (39.9143398282, -11.5106601718))
            Line((39.9143398282, -11.5106601718), (39.8, -11.625))
            Line((39.8, -11.625), (43.675, -15.5))
        make_face()
        Polygon((35.925, -15.5), (43.675, -15.5), (39.8, -11.625), align=None)
        with BuildLine():
            Line((43.6, -7.825), (43.6, -7.75))
            Line((43.6, -7.75), (35.925, -7.75))
            Line((35.925, -7.75), (39.8, -11.625))
            Line((39.8, -11.625), (39.9143398282, -11.5106601718))
            ThreePointArc((39.9143398282, -11.5106601718), (39.9143398282, -9.3893398282), (42.0356601718, -9.3893398282))
            Line((42.0356601718, -9.3893398282), (43.6, -7.825))
        make_face()
        Polygon((43.675, -7.75), (43.6, -7.75), (43.6, -7.825), align=None)
        Polygon((39.8, -11.625), (35.925, -7.75), (35.925, -15.5), align=None)
    extrude(amount=F2_DEPTH)


solid = f1.part
